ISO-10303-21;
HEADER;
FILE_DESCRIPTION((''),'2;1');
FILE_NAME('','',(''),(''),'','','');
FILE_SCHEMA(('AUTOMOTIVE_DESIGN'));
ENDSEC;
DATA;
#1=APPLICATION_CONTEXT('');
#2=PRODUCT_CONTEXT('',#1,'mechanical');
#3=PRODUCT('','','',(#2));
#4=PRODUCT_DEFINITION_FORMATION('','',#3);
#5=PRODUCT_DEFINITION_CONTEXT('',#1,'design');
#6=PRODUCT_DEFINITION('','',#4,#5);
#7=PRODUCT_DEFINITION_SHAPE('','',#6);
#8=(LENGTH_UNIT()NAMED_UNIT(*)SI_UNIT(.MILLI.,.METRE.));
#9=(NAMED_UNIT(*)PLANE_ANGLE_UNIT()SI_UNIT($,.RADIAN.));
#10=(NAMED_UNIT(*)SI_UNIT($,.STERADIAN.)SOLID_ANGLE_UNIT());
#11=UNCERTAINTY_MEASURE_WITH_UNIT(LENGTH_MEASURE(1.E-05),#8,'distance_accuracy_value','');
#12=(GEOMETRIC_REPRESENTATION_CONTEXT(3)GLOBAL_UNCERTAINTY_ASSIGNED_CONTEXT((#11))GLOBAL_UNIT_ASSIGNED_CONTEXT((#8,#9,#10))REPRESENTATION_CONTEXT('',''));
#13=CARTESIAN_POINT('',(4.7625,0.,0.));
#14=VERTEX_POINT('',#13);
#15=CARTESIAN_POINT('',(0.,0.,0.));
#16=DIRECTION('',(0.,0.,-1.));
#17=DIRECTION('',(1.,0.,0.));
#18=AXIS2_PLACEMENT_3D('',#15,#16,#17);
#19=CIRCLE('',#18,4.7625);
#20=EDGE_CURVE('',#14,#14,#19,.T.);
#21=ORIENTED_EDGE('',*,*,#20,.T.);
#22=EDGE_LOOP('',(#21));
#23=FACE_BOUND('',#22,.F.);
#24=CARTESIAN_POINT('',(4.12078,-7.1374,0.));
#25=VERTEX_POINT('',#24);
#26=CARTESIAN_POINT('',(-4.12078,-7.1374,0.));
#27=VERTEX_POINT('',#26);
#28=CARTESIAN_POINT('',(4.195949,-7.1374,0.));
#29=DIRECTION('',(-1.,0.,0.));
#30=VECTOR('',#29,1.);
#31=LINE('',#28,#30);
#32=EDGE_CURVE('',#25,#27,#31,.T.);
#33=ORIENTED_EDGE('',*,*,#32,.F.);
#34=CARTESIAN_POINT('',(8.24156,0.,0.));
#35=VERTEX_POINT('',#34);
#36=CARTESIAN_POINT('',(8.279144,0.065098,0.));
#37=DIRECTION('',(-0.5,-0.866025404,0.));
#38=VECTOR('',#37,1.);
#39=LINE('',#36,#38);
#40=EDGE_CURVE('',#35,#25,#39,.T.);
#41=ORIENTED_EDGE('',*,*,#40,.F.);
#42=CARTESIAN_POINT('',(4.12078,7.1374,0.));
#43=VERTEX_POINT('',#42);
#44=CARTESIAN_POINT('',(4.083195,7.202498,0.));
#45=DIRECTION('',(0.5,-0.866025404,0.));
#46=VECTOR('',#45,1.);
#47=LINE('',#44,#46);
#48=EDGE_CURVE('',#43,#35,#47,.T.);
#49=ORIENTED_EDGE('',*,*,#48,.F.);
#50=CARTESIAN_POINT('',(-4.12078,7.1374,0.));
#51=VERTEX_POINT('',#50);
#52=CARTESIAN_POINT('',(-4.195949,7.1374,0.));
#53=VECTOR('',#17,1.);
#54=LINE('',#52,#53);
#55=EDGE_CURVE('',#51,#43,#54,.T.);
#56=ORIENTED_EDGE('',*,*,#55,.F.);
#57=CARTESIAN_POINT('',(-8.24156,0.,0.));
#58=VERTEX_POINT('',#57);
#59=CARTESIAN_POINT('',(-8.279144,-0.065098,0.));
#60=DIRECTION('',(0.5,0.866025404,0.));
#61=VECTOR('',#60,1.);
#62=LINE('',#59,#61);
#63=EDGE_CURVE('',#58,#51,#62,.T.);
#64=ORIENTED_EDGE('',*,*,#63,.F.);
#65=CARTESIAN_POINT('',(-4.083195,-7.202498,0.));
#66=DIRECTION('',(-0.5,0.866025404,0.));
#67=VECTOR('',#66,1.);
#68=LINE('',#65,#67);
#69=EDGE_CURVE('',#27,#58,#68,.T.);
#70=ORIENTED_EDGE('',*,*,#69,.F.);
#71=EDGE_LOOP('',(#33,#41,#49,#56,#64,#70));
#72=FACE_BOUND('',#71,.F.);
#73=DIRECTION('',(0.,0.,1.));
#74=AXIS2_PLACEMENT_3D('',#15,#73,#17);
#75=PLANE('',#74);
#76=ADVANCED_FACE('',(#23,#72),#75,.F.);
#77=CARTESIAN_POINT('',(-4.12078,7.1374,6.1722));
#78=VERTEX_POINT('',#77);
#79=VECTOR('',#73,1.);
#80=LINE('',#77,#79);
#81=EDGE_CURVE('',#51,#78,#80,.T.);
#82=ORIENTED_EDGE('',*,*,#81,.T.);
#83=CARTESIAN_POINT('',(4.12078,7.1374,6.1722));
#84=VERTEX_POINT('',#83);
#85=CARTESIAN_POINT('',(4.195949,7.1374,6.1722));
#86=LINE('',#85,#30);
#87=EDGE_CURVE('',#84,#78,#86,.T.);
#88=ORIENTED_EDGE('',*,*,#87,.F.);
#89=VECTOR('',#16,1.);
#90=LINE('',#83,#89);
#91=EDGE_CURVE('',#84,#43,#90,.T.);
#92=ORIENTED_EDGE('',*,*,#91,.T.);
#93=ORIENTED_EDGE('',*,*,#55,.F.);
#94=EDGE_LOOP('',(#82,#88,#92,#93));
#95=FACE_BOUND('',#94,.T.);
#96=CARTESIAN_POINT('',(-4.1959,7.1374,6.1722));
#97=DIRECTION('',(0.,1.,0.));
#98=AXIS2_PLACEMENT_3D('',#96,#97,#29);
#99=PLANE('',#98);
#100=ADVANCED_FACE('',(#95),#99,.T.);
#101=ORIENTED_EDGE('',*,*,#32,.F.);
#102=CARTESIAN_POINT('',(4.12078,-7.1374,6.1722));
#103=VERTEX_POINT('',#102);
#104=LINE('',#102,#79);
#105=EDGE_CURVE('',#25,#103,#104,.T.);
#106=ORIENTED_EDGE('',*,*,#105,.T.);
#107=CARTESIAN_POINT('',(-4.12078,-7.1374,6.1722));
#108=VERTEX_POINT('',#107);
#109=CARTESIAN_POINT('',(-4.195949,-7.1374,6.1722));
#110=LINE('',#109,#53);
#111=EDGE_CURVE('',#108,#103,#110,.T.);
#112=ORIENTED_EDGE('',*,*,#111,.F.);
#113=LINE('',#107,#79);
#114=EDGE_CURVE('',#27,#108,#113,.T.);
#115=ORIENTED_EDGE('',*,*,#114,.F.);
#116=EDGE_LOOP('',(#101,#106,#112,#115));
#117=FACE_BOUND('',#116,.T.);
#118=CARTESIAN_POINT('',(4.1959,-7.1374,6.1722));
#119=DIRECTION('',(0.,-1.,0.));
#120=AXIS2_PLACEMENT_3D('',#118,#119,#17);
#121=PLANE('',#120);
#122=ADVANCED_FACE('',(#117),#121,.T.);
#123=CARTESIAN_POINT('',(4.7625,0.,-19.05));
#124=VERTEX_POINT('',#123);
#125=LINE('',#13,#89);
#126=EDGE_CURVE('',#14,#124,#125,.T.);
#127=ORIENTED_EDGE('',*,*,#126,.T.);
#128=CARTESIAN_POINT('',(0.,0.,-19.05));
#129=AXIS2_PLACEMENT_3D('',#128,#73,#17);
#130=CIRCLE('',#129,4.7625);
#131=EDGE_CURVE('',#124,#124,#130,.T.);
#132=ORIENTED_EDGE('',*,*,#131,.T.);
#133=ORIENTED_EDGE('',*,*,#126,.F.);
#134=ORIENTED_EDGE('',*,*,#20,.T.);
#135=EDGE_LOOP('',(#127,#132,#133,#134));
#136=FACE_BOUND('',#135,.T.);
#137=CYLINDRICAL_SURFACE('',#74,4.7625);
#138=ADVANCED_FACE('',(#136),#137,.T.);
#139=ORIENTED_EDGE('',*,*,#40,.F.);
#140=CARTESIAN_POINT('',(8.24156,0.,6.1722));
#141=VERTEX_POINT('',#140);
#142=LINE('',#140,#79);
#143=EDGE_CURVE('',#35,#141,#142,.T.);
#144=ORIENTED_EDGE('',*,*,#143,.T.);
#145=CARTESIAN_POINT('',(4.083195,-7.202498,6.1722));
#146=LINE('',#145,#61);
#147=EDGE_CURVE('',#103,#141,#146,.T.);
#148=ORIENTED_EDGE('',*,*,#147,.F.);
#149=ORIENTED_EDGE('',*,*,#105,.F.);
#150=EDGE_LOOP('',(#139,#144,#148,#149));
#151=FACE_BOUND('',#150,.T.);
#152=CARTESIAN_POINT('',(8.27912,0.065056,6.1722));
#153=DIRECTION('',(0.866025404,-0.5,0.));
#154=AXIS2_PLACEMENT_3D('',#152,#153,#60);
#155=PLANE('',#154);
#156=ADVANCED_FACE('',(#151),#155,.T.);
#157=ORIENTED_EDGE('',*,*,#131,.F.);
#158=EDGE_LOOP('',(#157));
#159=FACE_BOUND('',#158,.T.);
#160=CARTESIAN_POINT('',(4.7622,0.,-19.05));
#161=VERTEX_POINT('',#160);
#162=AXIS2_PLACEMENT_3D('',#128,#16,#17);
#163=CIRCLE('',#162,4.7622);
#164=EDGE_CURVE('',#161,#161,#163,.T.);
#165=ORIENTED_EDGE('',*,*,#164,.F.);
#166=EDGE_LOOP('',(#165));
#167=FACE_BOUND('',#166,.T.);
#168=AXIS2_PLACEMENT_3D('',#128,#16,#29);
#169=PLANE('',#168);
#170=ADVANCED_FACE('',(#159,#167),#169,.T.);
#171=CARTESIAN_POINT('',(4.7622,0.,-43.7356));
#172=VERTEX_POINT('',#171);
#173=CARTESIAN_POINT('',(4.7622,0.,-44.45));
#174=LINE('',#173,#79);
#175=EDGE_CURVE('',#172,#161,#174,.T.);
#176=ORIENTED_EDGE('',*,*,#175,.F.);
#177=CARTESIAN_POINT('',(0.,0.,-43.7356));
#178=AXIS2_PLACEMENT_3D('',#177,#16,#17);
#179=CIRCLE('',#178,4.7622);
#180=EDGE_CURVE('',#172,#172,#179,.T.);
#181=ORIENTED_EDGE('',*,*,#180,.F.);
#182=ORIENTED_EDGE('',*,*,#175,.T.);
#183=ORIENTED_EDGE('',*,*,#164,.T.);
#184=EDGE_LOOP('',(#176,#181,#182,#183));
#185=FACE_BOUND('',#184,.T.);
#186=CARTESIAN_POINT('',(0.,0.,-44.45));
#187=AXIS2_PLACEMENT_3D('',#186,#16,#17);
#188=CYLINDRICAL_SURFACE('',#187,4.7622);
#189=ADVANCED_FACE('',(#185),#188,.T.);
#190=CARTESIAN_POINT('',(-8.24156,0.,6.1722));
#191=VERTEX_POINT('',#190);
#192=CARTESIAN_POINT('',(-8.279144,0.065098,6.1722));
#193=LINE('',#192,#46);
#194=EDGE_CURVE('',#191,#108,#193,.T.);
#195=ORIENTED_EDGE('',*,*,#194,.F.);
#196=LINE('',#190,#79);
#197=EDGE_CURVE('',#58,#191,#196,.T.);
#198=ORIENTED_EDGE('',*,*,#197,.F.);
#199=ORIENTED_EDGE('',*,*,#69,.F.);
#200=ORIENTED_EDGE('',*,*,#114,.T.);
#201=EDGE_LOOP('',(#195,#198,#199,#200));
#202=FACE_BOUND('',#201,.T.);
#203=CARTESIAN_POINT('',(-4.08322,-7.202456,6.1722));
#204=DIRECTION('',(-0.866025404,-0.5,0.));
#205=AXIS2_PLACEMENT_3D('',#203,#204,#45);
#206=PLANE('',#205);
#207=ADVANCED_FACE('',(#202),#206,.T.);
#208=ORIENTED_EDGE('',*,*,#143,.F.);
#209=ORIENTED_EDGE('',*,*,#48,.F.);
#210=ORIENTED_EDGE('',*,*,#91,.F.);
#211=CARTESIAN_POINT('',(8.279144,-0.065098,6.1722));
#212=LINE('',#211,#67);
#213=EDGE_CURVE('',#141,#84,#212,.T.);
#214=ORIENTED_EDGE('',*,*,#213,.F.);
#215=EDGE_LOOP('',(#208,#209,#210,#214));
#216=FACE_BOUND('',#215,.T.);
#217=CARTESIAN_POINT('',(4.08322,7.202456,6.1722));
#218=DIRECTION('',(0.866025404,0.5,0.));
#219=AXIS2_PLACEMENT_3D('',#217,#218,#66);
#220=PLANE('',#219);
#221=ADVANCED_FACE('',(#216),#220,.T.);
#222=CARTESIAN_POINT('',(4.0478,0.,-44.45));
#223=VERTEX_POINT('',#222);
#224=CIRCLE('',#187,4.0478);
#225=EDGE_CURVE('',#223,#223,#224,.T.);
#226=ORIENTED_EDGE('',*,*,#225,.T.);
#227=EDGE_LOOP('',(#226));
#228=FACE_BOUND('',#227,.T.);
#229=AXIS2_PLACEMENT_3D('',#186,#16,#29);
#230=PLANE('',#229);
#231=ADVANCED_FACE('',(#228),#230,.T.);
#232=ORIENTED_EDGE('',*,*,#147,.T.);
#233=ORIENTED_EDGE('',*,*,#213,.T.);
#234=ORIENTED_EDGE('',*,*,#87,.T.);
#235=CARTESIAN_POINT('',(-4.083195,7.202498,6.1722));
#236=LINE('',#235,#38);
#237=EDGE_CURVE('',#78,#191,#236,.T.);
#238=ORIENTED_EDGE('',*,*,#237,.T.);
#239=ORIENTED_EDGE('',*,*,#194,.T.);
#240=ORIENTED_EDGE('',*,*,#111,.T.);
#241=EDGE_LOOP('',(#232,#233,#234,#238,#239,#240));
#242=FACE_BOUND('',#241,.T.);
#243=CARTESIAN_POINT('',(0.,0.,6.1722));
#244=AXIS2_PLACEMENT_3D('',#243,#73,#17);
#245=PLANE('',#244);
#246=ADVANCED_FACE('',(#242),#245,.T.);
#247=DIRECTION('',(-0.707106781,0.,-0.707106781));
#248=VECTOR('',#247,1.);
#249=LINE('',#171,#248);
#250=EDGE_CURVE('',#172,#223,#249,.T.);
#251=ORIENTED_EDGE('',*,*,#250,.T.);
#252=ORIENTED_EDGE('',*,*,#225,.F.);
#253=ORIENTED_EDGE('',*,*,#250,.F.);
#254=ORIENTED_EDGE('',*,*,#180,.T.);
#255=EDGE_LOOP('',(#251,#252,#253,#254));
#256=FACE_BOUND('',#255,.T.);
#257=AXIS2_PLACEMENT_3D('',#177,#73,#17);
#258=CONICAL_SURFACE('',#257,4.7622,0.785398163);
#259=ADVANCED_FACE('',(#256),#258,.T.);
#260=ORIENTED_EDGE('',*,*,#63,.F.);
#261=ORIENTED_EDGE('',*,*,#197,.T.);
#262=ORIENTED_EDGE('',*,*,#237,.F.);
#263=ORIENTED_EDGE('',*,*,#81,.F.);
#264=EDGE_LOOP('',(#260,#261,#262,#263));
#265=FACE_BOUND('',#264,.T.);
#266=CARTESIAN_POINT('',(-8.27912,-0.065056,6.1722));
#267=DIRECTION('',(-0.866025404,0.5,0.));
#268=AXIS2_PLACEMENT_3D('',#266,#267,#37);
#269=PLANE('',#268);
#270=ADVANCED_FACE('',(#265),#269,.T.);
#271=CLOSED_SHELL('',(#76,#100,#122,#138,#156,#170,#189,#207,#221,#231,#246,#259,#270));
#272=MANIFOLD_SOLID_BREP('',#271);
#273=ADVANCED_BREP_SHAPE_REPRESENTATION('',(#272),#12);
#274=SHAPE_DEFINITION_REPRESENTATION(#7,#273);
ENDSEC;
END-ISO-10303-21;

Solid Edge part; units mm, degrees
sketch "Sketch1" plane through (0, 0, 0) normal (0, 0, 1) x (1, 0, 0)
  circle A0 centre (0, 0) radius 8.2794
  dimension "D1" = 16.5588
extrude "Protrusion1" add sketch "Sketch1" along normal blind 6.1722
sketch "Sketch2" plane through (0, 0, 0) normal (0, 0, -1) x (1, 0, 0)
  circle A0 centre (0, 0) radius 4.7625
extrude "Protrusion2" add sketch "Sketch2" along normal blind 44.45
sketch "Sketch3" plane through (0, 0, -44.45) normal (0, 0, -1) x (1, 0, 0)
  circle A0 centre (0, 0) radius 4.7622
extrude "Cutout1" cut sketch "Sketch3" against normal blind 25.4 flip side to cut
chamfer "Chamfer_1" distance 0.7144 angle 45 1 edges at (-4.7622, 0, -44.45)
sketch "Sketch4" plane through (0, 0, 6.1722) normal (0, 0, 1) x (1, 0, 0)
  line L0 (-4.1959, 7.1374) -> (4.1959, 7.1374)
  dimension "D1" = 14.2748
extrude "Cutout2" cut sketch "Sketch4" against normal up to next material side at (0, 7.1874, 6.1722)
pattern_circular "Pattern1" count 6 over 360 about axis through (0, 0, 6.1722) along (0, 0, 1) of "Cutout2"
properties part number "117463"
